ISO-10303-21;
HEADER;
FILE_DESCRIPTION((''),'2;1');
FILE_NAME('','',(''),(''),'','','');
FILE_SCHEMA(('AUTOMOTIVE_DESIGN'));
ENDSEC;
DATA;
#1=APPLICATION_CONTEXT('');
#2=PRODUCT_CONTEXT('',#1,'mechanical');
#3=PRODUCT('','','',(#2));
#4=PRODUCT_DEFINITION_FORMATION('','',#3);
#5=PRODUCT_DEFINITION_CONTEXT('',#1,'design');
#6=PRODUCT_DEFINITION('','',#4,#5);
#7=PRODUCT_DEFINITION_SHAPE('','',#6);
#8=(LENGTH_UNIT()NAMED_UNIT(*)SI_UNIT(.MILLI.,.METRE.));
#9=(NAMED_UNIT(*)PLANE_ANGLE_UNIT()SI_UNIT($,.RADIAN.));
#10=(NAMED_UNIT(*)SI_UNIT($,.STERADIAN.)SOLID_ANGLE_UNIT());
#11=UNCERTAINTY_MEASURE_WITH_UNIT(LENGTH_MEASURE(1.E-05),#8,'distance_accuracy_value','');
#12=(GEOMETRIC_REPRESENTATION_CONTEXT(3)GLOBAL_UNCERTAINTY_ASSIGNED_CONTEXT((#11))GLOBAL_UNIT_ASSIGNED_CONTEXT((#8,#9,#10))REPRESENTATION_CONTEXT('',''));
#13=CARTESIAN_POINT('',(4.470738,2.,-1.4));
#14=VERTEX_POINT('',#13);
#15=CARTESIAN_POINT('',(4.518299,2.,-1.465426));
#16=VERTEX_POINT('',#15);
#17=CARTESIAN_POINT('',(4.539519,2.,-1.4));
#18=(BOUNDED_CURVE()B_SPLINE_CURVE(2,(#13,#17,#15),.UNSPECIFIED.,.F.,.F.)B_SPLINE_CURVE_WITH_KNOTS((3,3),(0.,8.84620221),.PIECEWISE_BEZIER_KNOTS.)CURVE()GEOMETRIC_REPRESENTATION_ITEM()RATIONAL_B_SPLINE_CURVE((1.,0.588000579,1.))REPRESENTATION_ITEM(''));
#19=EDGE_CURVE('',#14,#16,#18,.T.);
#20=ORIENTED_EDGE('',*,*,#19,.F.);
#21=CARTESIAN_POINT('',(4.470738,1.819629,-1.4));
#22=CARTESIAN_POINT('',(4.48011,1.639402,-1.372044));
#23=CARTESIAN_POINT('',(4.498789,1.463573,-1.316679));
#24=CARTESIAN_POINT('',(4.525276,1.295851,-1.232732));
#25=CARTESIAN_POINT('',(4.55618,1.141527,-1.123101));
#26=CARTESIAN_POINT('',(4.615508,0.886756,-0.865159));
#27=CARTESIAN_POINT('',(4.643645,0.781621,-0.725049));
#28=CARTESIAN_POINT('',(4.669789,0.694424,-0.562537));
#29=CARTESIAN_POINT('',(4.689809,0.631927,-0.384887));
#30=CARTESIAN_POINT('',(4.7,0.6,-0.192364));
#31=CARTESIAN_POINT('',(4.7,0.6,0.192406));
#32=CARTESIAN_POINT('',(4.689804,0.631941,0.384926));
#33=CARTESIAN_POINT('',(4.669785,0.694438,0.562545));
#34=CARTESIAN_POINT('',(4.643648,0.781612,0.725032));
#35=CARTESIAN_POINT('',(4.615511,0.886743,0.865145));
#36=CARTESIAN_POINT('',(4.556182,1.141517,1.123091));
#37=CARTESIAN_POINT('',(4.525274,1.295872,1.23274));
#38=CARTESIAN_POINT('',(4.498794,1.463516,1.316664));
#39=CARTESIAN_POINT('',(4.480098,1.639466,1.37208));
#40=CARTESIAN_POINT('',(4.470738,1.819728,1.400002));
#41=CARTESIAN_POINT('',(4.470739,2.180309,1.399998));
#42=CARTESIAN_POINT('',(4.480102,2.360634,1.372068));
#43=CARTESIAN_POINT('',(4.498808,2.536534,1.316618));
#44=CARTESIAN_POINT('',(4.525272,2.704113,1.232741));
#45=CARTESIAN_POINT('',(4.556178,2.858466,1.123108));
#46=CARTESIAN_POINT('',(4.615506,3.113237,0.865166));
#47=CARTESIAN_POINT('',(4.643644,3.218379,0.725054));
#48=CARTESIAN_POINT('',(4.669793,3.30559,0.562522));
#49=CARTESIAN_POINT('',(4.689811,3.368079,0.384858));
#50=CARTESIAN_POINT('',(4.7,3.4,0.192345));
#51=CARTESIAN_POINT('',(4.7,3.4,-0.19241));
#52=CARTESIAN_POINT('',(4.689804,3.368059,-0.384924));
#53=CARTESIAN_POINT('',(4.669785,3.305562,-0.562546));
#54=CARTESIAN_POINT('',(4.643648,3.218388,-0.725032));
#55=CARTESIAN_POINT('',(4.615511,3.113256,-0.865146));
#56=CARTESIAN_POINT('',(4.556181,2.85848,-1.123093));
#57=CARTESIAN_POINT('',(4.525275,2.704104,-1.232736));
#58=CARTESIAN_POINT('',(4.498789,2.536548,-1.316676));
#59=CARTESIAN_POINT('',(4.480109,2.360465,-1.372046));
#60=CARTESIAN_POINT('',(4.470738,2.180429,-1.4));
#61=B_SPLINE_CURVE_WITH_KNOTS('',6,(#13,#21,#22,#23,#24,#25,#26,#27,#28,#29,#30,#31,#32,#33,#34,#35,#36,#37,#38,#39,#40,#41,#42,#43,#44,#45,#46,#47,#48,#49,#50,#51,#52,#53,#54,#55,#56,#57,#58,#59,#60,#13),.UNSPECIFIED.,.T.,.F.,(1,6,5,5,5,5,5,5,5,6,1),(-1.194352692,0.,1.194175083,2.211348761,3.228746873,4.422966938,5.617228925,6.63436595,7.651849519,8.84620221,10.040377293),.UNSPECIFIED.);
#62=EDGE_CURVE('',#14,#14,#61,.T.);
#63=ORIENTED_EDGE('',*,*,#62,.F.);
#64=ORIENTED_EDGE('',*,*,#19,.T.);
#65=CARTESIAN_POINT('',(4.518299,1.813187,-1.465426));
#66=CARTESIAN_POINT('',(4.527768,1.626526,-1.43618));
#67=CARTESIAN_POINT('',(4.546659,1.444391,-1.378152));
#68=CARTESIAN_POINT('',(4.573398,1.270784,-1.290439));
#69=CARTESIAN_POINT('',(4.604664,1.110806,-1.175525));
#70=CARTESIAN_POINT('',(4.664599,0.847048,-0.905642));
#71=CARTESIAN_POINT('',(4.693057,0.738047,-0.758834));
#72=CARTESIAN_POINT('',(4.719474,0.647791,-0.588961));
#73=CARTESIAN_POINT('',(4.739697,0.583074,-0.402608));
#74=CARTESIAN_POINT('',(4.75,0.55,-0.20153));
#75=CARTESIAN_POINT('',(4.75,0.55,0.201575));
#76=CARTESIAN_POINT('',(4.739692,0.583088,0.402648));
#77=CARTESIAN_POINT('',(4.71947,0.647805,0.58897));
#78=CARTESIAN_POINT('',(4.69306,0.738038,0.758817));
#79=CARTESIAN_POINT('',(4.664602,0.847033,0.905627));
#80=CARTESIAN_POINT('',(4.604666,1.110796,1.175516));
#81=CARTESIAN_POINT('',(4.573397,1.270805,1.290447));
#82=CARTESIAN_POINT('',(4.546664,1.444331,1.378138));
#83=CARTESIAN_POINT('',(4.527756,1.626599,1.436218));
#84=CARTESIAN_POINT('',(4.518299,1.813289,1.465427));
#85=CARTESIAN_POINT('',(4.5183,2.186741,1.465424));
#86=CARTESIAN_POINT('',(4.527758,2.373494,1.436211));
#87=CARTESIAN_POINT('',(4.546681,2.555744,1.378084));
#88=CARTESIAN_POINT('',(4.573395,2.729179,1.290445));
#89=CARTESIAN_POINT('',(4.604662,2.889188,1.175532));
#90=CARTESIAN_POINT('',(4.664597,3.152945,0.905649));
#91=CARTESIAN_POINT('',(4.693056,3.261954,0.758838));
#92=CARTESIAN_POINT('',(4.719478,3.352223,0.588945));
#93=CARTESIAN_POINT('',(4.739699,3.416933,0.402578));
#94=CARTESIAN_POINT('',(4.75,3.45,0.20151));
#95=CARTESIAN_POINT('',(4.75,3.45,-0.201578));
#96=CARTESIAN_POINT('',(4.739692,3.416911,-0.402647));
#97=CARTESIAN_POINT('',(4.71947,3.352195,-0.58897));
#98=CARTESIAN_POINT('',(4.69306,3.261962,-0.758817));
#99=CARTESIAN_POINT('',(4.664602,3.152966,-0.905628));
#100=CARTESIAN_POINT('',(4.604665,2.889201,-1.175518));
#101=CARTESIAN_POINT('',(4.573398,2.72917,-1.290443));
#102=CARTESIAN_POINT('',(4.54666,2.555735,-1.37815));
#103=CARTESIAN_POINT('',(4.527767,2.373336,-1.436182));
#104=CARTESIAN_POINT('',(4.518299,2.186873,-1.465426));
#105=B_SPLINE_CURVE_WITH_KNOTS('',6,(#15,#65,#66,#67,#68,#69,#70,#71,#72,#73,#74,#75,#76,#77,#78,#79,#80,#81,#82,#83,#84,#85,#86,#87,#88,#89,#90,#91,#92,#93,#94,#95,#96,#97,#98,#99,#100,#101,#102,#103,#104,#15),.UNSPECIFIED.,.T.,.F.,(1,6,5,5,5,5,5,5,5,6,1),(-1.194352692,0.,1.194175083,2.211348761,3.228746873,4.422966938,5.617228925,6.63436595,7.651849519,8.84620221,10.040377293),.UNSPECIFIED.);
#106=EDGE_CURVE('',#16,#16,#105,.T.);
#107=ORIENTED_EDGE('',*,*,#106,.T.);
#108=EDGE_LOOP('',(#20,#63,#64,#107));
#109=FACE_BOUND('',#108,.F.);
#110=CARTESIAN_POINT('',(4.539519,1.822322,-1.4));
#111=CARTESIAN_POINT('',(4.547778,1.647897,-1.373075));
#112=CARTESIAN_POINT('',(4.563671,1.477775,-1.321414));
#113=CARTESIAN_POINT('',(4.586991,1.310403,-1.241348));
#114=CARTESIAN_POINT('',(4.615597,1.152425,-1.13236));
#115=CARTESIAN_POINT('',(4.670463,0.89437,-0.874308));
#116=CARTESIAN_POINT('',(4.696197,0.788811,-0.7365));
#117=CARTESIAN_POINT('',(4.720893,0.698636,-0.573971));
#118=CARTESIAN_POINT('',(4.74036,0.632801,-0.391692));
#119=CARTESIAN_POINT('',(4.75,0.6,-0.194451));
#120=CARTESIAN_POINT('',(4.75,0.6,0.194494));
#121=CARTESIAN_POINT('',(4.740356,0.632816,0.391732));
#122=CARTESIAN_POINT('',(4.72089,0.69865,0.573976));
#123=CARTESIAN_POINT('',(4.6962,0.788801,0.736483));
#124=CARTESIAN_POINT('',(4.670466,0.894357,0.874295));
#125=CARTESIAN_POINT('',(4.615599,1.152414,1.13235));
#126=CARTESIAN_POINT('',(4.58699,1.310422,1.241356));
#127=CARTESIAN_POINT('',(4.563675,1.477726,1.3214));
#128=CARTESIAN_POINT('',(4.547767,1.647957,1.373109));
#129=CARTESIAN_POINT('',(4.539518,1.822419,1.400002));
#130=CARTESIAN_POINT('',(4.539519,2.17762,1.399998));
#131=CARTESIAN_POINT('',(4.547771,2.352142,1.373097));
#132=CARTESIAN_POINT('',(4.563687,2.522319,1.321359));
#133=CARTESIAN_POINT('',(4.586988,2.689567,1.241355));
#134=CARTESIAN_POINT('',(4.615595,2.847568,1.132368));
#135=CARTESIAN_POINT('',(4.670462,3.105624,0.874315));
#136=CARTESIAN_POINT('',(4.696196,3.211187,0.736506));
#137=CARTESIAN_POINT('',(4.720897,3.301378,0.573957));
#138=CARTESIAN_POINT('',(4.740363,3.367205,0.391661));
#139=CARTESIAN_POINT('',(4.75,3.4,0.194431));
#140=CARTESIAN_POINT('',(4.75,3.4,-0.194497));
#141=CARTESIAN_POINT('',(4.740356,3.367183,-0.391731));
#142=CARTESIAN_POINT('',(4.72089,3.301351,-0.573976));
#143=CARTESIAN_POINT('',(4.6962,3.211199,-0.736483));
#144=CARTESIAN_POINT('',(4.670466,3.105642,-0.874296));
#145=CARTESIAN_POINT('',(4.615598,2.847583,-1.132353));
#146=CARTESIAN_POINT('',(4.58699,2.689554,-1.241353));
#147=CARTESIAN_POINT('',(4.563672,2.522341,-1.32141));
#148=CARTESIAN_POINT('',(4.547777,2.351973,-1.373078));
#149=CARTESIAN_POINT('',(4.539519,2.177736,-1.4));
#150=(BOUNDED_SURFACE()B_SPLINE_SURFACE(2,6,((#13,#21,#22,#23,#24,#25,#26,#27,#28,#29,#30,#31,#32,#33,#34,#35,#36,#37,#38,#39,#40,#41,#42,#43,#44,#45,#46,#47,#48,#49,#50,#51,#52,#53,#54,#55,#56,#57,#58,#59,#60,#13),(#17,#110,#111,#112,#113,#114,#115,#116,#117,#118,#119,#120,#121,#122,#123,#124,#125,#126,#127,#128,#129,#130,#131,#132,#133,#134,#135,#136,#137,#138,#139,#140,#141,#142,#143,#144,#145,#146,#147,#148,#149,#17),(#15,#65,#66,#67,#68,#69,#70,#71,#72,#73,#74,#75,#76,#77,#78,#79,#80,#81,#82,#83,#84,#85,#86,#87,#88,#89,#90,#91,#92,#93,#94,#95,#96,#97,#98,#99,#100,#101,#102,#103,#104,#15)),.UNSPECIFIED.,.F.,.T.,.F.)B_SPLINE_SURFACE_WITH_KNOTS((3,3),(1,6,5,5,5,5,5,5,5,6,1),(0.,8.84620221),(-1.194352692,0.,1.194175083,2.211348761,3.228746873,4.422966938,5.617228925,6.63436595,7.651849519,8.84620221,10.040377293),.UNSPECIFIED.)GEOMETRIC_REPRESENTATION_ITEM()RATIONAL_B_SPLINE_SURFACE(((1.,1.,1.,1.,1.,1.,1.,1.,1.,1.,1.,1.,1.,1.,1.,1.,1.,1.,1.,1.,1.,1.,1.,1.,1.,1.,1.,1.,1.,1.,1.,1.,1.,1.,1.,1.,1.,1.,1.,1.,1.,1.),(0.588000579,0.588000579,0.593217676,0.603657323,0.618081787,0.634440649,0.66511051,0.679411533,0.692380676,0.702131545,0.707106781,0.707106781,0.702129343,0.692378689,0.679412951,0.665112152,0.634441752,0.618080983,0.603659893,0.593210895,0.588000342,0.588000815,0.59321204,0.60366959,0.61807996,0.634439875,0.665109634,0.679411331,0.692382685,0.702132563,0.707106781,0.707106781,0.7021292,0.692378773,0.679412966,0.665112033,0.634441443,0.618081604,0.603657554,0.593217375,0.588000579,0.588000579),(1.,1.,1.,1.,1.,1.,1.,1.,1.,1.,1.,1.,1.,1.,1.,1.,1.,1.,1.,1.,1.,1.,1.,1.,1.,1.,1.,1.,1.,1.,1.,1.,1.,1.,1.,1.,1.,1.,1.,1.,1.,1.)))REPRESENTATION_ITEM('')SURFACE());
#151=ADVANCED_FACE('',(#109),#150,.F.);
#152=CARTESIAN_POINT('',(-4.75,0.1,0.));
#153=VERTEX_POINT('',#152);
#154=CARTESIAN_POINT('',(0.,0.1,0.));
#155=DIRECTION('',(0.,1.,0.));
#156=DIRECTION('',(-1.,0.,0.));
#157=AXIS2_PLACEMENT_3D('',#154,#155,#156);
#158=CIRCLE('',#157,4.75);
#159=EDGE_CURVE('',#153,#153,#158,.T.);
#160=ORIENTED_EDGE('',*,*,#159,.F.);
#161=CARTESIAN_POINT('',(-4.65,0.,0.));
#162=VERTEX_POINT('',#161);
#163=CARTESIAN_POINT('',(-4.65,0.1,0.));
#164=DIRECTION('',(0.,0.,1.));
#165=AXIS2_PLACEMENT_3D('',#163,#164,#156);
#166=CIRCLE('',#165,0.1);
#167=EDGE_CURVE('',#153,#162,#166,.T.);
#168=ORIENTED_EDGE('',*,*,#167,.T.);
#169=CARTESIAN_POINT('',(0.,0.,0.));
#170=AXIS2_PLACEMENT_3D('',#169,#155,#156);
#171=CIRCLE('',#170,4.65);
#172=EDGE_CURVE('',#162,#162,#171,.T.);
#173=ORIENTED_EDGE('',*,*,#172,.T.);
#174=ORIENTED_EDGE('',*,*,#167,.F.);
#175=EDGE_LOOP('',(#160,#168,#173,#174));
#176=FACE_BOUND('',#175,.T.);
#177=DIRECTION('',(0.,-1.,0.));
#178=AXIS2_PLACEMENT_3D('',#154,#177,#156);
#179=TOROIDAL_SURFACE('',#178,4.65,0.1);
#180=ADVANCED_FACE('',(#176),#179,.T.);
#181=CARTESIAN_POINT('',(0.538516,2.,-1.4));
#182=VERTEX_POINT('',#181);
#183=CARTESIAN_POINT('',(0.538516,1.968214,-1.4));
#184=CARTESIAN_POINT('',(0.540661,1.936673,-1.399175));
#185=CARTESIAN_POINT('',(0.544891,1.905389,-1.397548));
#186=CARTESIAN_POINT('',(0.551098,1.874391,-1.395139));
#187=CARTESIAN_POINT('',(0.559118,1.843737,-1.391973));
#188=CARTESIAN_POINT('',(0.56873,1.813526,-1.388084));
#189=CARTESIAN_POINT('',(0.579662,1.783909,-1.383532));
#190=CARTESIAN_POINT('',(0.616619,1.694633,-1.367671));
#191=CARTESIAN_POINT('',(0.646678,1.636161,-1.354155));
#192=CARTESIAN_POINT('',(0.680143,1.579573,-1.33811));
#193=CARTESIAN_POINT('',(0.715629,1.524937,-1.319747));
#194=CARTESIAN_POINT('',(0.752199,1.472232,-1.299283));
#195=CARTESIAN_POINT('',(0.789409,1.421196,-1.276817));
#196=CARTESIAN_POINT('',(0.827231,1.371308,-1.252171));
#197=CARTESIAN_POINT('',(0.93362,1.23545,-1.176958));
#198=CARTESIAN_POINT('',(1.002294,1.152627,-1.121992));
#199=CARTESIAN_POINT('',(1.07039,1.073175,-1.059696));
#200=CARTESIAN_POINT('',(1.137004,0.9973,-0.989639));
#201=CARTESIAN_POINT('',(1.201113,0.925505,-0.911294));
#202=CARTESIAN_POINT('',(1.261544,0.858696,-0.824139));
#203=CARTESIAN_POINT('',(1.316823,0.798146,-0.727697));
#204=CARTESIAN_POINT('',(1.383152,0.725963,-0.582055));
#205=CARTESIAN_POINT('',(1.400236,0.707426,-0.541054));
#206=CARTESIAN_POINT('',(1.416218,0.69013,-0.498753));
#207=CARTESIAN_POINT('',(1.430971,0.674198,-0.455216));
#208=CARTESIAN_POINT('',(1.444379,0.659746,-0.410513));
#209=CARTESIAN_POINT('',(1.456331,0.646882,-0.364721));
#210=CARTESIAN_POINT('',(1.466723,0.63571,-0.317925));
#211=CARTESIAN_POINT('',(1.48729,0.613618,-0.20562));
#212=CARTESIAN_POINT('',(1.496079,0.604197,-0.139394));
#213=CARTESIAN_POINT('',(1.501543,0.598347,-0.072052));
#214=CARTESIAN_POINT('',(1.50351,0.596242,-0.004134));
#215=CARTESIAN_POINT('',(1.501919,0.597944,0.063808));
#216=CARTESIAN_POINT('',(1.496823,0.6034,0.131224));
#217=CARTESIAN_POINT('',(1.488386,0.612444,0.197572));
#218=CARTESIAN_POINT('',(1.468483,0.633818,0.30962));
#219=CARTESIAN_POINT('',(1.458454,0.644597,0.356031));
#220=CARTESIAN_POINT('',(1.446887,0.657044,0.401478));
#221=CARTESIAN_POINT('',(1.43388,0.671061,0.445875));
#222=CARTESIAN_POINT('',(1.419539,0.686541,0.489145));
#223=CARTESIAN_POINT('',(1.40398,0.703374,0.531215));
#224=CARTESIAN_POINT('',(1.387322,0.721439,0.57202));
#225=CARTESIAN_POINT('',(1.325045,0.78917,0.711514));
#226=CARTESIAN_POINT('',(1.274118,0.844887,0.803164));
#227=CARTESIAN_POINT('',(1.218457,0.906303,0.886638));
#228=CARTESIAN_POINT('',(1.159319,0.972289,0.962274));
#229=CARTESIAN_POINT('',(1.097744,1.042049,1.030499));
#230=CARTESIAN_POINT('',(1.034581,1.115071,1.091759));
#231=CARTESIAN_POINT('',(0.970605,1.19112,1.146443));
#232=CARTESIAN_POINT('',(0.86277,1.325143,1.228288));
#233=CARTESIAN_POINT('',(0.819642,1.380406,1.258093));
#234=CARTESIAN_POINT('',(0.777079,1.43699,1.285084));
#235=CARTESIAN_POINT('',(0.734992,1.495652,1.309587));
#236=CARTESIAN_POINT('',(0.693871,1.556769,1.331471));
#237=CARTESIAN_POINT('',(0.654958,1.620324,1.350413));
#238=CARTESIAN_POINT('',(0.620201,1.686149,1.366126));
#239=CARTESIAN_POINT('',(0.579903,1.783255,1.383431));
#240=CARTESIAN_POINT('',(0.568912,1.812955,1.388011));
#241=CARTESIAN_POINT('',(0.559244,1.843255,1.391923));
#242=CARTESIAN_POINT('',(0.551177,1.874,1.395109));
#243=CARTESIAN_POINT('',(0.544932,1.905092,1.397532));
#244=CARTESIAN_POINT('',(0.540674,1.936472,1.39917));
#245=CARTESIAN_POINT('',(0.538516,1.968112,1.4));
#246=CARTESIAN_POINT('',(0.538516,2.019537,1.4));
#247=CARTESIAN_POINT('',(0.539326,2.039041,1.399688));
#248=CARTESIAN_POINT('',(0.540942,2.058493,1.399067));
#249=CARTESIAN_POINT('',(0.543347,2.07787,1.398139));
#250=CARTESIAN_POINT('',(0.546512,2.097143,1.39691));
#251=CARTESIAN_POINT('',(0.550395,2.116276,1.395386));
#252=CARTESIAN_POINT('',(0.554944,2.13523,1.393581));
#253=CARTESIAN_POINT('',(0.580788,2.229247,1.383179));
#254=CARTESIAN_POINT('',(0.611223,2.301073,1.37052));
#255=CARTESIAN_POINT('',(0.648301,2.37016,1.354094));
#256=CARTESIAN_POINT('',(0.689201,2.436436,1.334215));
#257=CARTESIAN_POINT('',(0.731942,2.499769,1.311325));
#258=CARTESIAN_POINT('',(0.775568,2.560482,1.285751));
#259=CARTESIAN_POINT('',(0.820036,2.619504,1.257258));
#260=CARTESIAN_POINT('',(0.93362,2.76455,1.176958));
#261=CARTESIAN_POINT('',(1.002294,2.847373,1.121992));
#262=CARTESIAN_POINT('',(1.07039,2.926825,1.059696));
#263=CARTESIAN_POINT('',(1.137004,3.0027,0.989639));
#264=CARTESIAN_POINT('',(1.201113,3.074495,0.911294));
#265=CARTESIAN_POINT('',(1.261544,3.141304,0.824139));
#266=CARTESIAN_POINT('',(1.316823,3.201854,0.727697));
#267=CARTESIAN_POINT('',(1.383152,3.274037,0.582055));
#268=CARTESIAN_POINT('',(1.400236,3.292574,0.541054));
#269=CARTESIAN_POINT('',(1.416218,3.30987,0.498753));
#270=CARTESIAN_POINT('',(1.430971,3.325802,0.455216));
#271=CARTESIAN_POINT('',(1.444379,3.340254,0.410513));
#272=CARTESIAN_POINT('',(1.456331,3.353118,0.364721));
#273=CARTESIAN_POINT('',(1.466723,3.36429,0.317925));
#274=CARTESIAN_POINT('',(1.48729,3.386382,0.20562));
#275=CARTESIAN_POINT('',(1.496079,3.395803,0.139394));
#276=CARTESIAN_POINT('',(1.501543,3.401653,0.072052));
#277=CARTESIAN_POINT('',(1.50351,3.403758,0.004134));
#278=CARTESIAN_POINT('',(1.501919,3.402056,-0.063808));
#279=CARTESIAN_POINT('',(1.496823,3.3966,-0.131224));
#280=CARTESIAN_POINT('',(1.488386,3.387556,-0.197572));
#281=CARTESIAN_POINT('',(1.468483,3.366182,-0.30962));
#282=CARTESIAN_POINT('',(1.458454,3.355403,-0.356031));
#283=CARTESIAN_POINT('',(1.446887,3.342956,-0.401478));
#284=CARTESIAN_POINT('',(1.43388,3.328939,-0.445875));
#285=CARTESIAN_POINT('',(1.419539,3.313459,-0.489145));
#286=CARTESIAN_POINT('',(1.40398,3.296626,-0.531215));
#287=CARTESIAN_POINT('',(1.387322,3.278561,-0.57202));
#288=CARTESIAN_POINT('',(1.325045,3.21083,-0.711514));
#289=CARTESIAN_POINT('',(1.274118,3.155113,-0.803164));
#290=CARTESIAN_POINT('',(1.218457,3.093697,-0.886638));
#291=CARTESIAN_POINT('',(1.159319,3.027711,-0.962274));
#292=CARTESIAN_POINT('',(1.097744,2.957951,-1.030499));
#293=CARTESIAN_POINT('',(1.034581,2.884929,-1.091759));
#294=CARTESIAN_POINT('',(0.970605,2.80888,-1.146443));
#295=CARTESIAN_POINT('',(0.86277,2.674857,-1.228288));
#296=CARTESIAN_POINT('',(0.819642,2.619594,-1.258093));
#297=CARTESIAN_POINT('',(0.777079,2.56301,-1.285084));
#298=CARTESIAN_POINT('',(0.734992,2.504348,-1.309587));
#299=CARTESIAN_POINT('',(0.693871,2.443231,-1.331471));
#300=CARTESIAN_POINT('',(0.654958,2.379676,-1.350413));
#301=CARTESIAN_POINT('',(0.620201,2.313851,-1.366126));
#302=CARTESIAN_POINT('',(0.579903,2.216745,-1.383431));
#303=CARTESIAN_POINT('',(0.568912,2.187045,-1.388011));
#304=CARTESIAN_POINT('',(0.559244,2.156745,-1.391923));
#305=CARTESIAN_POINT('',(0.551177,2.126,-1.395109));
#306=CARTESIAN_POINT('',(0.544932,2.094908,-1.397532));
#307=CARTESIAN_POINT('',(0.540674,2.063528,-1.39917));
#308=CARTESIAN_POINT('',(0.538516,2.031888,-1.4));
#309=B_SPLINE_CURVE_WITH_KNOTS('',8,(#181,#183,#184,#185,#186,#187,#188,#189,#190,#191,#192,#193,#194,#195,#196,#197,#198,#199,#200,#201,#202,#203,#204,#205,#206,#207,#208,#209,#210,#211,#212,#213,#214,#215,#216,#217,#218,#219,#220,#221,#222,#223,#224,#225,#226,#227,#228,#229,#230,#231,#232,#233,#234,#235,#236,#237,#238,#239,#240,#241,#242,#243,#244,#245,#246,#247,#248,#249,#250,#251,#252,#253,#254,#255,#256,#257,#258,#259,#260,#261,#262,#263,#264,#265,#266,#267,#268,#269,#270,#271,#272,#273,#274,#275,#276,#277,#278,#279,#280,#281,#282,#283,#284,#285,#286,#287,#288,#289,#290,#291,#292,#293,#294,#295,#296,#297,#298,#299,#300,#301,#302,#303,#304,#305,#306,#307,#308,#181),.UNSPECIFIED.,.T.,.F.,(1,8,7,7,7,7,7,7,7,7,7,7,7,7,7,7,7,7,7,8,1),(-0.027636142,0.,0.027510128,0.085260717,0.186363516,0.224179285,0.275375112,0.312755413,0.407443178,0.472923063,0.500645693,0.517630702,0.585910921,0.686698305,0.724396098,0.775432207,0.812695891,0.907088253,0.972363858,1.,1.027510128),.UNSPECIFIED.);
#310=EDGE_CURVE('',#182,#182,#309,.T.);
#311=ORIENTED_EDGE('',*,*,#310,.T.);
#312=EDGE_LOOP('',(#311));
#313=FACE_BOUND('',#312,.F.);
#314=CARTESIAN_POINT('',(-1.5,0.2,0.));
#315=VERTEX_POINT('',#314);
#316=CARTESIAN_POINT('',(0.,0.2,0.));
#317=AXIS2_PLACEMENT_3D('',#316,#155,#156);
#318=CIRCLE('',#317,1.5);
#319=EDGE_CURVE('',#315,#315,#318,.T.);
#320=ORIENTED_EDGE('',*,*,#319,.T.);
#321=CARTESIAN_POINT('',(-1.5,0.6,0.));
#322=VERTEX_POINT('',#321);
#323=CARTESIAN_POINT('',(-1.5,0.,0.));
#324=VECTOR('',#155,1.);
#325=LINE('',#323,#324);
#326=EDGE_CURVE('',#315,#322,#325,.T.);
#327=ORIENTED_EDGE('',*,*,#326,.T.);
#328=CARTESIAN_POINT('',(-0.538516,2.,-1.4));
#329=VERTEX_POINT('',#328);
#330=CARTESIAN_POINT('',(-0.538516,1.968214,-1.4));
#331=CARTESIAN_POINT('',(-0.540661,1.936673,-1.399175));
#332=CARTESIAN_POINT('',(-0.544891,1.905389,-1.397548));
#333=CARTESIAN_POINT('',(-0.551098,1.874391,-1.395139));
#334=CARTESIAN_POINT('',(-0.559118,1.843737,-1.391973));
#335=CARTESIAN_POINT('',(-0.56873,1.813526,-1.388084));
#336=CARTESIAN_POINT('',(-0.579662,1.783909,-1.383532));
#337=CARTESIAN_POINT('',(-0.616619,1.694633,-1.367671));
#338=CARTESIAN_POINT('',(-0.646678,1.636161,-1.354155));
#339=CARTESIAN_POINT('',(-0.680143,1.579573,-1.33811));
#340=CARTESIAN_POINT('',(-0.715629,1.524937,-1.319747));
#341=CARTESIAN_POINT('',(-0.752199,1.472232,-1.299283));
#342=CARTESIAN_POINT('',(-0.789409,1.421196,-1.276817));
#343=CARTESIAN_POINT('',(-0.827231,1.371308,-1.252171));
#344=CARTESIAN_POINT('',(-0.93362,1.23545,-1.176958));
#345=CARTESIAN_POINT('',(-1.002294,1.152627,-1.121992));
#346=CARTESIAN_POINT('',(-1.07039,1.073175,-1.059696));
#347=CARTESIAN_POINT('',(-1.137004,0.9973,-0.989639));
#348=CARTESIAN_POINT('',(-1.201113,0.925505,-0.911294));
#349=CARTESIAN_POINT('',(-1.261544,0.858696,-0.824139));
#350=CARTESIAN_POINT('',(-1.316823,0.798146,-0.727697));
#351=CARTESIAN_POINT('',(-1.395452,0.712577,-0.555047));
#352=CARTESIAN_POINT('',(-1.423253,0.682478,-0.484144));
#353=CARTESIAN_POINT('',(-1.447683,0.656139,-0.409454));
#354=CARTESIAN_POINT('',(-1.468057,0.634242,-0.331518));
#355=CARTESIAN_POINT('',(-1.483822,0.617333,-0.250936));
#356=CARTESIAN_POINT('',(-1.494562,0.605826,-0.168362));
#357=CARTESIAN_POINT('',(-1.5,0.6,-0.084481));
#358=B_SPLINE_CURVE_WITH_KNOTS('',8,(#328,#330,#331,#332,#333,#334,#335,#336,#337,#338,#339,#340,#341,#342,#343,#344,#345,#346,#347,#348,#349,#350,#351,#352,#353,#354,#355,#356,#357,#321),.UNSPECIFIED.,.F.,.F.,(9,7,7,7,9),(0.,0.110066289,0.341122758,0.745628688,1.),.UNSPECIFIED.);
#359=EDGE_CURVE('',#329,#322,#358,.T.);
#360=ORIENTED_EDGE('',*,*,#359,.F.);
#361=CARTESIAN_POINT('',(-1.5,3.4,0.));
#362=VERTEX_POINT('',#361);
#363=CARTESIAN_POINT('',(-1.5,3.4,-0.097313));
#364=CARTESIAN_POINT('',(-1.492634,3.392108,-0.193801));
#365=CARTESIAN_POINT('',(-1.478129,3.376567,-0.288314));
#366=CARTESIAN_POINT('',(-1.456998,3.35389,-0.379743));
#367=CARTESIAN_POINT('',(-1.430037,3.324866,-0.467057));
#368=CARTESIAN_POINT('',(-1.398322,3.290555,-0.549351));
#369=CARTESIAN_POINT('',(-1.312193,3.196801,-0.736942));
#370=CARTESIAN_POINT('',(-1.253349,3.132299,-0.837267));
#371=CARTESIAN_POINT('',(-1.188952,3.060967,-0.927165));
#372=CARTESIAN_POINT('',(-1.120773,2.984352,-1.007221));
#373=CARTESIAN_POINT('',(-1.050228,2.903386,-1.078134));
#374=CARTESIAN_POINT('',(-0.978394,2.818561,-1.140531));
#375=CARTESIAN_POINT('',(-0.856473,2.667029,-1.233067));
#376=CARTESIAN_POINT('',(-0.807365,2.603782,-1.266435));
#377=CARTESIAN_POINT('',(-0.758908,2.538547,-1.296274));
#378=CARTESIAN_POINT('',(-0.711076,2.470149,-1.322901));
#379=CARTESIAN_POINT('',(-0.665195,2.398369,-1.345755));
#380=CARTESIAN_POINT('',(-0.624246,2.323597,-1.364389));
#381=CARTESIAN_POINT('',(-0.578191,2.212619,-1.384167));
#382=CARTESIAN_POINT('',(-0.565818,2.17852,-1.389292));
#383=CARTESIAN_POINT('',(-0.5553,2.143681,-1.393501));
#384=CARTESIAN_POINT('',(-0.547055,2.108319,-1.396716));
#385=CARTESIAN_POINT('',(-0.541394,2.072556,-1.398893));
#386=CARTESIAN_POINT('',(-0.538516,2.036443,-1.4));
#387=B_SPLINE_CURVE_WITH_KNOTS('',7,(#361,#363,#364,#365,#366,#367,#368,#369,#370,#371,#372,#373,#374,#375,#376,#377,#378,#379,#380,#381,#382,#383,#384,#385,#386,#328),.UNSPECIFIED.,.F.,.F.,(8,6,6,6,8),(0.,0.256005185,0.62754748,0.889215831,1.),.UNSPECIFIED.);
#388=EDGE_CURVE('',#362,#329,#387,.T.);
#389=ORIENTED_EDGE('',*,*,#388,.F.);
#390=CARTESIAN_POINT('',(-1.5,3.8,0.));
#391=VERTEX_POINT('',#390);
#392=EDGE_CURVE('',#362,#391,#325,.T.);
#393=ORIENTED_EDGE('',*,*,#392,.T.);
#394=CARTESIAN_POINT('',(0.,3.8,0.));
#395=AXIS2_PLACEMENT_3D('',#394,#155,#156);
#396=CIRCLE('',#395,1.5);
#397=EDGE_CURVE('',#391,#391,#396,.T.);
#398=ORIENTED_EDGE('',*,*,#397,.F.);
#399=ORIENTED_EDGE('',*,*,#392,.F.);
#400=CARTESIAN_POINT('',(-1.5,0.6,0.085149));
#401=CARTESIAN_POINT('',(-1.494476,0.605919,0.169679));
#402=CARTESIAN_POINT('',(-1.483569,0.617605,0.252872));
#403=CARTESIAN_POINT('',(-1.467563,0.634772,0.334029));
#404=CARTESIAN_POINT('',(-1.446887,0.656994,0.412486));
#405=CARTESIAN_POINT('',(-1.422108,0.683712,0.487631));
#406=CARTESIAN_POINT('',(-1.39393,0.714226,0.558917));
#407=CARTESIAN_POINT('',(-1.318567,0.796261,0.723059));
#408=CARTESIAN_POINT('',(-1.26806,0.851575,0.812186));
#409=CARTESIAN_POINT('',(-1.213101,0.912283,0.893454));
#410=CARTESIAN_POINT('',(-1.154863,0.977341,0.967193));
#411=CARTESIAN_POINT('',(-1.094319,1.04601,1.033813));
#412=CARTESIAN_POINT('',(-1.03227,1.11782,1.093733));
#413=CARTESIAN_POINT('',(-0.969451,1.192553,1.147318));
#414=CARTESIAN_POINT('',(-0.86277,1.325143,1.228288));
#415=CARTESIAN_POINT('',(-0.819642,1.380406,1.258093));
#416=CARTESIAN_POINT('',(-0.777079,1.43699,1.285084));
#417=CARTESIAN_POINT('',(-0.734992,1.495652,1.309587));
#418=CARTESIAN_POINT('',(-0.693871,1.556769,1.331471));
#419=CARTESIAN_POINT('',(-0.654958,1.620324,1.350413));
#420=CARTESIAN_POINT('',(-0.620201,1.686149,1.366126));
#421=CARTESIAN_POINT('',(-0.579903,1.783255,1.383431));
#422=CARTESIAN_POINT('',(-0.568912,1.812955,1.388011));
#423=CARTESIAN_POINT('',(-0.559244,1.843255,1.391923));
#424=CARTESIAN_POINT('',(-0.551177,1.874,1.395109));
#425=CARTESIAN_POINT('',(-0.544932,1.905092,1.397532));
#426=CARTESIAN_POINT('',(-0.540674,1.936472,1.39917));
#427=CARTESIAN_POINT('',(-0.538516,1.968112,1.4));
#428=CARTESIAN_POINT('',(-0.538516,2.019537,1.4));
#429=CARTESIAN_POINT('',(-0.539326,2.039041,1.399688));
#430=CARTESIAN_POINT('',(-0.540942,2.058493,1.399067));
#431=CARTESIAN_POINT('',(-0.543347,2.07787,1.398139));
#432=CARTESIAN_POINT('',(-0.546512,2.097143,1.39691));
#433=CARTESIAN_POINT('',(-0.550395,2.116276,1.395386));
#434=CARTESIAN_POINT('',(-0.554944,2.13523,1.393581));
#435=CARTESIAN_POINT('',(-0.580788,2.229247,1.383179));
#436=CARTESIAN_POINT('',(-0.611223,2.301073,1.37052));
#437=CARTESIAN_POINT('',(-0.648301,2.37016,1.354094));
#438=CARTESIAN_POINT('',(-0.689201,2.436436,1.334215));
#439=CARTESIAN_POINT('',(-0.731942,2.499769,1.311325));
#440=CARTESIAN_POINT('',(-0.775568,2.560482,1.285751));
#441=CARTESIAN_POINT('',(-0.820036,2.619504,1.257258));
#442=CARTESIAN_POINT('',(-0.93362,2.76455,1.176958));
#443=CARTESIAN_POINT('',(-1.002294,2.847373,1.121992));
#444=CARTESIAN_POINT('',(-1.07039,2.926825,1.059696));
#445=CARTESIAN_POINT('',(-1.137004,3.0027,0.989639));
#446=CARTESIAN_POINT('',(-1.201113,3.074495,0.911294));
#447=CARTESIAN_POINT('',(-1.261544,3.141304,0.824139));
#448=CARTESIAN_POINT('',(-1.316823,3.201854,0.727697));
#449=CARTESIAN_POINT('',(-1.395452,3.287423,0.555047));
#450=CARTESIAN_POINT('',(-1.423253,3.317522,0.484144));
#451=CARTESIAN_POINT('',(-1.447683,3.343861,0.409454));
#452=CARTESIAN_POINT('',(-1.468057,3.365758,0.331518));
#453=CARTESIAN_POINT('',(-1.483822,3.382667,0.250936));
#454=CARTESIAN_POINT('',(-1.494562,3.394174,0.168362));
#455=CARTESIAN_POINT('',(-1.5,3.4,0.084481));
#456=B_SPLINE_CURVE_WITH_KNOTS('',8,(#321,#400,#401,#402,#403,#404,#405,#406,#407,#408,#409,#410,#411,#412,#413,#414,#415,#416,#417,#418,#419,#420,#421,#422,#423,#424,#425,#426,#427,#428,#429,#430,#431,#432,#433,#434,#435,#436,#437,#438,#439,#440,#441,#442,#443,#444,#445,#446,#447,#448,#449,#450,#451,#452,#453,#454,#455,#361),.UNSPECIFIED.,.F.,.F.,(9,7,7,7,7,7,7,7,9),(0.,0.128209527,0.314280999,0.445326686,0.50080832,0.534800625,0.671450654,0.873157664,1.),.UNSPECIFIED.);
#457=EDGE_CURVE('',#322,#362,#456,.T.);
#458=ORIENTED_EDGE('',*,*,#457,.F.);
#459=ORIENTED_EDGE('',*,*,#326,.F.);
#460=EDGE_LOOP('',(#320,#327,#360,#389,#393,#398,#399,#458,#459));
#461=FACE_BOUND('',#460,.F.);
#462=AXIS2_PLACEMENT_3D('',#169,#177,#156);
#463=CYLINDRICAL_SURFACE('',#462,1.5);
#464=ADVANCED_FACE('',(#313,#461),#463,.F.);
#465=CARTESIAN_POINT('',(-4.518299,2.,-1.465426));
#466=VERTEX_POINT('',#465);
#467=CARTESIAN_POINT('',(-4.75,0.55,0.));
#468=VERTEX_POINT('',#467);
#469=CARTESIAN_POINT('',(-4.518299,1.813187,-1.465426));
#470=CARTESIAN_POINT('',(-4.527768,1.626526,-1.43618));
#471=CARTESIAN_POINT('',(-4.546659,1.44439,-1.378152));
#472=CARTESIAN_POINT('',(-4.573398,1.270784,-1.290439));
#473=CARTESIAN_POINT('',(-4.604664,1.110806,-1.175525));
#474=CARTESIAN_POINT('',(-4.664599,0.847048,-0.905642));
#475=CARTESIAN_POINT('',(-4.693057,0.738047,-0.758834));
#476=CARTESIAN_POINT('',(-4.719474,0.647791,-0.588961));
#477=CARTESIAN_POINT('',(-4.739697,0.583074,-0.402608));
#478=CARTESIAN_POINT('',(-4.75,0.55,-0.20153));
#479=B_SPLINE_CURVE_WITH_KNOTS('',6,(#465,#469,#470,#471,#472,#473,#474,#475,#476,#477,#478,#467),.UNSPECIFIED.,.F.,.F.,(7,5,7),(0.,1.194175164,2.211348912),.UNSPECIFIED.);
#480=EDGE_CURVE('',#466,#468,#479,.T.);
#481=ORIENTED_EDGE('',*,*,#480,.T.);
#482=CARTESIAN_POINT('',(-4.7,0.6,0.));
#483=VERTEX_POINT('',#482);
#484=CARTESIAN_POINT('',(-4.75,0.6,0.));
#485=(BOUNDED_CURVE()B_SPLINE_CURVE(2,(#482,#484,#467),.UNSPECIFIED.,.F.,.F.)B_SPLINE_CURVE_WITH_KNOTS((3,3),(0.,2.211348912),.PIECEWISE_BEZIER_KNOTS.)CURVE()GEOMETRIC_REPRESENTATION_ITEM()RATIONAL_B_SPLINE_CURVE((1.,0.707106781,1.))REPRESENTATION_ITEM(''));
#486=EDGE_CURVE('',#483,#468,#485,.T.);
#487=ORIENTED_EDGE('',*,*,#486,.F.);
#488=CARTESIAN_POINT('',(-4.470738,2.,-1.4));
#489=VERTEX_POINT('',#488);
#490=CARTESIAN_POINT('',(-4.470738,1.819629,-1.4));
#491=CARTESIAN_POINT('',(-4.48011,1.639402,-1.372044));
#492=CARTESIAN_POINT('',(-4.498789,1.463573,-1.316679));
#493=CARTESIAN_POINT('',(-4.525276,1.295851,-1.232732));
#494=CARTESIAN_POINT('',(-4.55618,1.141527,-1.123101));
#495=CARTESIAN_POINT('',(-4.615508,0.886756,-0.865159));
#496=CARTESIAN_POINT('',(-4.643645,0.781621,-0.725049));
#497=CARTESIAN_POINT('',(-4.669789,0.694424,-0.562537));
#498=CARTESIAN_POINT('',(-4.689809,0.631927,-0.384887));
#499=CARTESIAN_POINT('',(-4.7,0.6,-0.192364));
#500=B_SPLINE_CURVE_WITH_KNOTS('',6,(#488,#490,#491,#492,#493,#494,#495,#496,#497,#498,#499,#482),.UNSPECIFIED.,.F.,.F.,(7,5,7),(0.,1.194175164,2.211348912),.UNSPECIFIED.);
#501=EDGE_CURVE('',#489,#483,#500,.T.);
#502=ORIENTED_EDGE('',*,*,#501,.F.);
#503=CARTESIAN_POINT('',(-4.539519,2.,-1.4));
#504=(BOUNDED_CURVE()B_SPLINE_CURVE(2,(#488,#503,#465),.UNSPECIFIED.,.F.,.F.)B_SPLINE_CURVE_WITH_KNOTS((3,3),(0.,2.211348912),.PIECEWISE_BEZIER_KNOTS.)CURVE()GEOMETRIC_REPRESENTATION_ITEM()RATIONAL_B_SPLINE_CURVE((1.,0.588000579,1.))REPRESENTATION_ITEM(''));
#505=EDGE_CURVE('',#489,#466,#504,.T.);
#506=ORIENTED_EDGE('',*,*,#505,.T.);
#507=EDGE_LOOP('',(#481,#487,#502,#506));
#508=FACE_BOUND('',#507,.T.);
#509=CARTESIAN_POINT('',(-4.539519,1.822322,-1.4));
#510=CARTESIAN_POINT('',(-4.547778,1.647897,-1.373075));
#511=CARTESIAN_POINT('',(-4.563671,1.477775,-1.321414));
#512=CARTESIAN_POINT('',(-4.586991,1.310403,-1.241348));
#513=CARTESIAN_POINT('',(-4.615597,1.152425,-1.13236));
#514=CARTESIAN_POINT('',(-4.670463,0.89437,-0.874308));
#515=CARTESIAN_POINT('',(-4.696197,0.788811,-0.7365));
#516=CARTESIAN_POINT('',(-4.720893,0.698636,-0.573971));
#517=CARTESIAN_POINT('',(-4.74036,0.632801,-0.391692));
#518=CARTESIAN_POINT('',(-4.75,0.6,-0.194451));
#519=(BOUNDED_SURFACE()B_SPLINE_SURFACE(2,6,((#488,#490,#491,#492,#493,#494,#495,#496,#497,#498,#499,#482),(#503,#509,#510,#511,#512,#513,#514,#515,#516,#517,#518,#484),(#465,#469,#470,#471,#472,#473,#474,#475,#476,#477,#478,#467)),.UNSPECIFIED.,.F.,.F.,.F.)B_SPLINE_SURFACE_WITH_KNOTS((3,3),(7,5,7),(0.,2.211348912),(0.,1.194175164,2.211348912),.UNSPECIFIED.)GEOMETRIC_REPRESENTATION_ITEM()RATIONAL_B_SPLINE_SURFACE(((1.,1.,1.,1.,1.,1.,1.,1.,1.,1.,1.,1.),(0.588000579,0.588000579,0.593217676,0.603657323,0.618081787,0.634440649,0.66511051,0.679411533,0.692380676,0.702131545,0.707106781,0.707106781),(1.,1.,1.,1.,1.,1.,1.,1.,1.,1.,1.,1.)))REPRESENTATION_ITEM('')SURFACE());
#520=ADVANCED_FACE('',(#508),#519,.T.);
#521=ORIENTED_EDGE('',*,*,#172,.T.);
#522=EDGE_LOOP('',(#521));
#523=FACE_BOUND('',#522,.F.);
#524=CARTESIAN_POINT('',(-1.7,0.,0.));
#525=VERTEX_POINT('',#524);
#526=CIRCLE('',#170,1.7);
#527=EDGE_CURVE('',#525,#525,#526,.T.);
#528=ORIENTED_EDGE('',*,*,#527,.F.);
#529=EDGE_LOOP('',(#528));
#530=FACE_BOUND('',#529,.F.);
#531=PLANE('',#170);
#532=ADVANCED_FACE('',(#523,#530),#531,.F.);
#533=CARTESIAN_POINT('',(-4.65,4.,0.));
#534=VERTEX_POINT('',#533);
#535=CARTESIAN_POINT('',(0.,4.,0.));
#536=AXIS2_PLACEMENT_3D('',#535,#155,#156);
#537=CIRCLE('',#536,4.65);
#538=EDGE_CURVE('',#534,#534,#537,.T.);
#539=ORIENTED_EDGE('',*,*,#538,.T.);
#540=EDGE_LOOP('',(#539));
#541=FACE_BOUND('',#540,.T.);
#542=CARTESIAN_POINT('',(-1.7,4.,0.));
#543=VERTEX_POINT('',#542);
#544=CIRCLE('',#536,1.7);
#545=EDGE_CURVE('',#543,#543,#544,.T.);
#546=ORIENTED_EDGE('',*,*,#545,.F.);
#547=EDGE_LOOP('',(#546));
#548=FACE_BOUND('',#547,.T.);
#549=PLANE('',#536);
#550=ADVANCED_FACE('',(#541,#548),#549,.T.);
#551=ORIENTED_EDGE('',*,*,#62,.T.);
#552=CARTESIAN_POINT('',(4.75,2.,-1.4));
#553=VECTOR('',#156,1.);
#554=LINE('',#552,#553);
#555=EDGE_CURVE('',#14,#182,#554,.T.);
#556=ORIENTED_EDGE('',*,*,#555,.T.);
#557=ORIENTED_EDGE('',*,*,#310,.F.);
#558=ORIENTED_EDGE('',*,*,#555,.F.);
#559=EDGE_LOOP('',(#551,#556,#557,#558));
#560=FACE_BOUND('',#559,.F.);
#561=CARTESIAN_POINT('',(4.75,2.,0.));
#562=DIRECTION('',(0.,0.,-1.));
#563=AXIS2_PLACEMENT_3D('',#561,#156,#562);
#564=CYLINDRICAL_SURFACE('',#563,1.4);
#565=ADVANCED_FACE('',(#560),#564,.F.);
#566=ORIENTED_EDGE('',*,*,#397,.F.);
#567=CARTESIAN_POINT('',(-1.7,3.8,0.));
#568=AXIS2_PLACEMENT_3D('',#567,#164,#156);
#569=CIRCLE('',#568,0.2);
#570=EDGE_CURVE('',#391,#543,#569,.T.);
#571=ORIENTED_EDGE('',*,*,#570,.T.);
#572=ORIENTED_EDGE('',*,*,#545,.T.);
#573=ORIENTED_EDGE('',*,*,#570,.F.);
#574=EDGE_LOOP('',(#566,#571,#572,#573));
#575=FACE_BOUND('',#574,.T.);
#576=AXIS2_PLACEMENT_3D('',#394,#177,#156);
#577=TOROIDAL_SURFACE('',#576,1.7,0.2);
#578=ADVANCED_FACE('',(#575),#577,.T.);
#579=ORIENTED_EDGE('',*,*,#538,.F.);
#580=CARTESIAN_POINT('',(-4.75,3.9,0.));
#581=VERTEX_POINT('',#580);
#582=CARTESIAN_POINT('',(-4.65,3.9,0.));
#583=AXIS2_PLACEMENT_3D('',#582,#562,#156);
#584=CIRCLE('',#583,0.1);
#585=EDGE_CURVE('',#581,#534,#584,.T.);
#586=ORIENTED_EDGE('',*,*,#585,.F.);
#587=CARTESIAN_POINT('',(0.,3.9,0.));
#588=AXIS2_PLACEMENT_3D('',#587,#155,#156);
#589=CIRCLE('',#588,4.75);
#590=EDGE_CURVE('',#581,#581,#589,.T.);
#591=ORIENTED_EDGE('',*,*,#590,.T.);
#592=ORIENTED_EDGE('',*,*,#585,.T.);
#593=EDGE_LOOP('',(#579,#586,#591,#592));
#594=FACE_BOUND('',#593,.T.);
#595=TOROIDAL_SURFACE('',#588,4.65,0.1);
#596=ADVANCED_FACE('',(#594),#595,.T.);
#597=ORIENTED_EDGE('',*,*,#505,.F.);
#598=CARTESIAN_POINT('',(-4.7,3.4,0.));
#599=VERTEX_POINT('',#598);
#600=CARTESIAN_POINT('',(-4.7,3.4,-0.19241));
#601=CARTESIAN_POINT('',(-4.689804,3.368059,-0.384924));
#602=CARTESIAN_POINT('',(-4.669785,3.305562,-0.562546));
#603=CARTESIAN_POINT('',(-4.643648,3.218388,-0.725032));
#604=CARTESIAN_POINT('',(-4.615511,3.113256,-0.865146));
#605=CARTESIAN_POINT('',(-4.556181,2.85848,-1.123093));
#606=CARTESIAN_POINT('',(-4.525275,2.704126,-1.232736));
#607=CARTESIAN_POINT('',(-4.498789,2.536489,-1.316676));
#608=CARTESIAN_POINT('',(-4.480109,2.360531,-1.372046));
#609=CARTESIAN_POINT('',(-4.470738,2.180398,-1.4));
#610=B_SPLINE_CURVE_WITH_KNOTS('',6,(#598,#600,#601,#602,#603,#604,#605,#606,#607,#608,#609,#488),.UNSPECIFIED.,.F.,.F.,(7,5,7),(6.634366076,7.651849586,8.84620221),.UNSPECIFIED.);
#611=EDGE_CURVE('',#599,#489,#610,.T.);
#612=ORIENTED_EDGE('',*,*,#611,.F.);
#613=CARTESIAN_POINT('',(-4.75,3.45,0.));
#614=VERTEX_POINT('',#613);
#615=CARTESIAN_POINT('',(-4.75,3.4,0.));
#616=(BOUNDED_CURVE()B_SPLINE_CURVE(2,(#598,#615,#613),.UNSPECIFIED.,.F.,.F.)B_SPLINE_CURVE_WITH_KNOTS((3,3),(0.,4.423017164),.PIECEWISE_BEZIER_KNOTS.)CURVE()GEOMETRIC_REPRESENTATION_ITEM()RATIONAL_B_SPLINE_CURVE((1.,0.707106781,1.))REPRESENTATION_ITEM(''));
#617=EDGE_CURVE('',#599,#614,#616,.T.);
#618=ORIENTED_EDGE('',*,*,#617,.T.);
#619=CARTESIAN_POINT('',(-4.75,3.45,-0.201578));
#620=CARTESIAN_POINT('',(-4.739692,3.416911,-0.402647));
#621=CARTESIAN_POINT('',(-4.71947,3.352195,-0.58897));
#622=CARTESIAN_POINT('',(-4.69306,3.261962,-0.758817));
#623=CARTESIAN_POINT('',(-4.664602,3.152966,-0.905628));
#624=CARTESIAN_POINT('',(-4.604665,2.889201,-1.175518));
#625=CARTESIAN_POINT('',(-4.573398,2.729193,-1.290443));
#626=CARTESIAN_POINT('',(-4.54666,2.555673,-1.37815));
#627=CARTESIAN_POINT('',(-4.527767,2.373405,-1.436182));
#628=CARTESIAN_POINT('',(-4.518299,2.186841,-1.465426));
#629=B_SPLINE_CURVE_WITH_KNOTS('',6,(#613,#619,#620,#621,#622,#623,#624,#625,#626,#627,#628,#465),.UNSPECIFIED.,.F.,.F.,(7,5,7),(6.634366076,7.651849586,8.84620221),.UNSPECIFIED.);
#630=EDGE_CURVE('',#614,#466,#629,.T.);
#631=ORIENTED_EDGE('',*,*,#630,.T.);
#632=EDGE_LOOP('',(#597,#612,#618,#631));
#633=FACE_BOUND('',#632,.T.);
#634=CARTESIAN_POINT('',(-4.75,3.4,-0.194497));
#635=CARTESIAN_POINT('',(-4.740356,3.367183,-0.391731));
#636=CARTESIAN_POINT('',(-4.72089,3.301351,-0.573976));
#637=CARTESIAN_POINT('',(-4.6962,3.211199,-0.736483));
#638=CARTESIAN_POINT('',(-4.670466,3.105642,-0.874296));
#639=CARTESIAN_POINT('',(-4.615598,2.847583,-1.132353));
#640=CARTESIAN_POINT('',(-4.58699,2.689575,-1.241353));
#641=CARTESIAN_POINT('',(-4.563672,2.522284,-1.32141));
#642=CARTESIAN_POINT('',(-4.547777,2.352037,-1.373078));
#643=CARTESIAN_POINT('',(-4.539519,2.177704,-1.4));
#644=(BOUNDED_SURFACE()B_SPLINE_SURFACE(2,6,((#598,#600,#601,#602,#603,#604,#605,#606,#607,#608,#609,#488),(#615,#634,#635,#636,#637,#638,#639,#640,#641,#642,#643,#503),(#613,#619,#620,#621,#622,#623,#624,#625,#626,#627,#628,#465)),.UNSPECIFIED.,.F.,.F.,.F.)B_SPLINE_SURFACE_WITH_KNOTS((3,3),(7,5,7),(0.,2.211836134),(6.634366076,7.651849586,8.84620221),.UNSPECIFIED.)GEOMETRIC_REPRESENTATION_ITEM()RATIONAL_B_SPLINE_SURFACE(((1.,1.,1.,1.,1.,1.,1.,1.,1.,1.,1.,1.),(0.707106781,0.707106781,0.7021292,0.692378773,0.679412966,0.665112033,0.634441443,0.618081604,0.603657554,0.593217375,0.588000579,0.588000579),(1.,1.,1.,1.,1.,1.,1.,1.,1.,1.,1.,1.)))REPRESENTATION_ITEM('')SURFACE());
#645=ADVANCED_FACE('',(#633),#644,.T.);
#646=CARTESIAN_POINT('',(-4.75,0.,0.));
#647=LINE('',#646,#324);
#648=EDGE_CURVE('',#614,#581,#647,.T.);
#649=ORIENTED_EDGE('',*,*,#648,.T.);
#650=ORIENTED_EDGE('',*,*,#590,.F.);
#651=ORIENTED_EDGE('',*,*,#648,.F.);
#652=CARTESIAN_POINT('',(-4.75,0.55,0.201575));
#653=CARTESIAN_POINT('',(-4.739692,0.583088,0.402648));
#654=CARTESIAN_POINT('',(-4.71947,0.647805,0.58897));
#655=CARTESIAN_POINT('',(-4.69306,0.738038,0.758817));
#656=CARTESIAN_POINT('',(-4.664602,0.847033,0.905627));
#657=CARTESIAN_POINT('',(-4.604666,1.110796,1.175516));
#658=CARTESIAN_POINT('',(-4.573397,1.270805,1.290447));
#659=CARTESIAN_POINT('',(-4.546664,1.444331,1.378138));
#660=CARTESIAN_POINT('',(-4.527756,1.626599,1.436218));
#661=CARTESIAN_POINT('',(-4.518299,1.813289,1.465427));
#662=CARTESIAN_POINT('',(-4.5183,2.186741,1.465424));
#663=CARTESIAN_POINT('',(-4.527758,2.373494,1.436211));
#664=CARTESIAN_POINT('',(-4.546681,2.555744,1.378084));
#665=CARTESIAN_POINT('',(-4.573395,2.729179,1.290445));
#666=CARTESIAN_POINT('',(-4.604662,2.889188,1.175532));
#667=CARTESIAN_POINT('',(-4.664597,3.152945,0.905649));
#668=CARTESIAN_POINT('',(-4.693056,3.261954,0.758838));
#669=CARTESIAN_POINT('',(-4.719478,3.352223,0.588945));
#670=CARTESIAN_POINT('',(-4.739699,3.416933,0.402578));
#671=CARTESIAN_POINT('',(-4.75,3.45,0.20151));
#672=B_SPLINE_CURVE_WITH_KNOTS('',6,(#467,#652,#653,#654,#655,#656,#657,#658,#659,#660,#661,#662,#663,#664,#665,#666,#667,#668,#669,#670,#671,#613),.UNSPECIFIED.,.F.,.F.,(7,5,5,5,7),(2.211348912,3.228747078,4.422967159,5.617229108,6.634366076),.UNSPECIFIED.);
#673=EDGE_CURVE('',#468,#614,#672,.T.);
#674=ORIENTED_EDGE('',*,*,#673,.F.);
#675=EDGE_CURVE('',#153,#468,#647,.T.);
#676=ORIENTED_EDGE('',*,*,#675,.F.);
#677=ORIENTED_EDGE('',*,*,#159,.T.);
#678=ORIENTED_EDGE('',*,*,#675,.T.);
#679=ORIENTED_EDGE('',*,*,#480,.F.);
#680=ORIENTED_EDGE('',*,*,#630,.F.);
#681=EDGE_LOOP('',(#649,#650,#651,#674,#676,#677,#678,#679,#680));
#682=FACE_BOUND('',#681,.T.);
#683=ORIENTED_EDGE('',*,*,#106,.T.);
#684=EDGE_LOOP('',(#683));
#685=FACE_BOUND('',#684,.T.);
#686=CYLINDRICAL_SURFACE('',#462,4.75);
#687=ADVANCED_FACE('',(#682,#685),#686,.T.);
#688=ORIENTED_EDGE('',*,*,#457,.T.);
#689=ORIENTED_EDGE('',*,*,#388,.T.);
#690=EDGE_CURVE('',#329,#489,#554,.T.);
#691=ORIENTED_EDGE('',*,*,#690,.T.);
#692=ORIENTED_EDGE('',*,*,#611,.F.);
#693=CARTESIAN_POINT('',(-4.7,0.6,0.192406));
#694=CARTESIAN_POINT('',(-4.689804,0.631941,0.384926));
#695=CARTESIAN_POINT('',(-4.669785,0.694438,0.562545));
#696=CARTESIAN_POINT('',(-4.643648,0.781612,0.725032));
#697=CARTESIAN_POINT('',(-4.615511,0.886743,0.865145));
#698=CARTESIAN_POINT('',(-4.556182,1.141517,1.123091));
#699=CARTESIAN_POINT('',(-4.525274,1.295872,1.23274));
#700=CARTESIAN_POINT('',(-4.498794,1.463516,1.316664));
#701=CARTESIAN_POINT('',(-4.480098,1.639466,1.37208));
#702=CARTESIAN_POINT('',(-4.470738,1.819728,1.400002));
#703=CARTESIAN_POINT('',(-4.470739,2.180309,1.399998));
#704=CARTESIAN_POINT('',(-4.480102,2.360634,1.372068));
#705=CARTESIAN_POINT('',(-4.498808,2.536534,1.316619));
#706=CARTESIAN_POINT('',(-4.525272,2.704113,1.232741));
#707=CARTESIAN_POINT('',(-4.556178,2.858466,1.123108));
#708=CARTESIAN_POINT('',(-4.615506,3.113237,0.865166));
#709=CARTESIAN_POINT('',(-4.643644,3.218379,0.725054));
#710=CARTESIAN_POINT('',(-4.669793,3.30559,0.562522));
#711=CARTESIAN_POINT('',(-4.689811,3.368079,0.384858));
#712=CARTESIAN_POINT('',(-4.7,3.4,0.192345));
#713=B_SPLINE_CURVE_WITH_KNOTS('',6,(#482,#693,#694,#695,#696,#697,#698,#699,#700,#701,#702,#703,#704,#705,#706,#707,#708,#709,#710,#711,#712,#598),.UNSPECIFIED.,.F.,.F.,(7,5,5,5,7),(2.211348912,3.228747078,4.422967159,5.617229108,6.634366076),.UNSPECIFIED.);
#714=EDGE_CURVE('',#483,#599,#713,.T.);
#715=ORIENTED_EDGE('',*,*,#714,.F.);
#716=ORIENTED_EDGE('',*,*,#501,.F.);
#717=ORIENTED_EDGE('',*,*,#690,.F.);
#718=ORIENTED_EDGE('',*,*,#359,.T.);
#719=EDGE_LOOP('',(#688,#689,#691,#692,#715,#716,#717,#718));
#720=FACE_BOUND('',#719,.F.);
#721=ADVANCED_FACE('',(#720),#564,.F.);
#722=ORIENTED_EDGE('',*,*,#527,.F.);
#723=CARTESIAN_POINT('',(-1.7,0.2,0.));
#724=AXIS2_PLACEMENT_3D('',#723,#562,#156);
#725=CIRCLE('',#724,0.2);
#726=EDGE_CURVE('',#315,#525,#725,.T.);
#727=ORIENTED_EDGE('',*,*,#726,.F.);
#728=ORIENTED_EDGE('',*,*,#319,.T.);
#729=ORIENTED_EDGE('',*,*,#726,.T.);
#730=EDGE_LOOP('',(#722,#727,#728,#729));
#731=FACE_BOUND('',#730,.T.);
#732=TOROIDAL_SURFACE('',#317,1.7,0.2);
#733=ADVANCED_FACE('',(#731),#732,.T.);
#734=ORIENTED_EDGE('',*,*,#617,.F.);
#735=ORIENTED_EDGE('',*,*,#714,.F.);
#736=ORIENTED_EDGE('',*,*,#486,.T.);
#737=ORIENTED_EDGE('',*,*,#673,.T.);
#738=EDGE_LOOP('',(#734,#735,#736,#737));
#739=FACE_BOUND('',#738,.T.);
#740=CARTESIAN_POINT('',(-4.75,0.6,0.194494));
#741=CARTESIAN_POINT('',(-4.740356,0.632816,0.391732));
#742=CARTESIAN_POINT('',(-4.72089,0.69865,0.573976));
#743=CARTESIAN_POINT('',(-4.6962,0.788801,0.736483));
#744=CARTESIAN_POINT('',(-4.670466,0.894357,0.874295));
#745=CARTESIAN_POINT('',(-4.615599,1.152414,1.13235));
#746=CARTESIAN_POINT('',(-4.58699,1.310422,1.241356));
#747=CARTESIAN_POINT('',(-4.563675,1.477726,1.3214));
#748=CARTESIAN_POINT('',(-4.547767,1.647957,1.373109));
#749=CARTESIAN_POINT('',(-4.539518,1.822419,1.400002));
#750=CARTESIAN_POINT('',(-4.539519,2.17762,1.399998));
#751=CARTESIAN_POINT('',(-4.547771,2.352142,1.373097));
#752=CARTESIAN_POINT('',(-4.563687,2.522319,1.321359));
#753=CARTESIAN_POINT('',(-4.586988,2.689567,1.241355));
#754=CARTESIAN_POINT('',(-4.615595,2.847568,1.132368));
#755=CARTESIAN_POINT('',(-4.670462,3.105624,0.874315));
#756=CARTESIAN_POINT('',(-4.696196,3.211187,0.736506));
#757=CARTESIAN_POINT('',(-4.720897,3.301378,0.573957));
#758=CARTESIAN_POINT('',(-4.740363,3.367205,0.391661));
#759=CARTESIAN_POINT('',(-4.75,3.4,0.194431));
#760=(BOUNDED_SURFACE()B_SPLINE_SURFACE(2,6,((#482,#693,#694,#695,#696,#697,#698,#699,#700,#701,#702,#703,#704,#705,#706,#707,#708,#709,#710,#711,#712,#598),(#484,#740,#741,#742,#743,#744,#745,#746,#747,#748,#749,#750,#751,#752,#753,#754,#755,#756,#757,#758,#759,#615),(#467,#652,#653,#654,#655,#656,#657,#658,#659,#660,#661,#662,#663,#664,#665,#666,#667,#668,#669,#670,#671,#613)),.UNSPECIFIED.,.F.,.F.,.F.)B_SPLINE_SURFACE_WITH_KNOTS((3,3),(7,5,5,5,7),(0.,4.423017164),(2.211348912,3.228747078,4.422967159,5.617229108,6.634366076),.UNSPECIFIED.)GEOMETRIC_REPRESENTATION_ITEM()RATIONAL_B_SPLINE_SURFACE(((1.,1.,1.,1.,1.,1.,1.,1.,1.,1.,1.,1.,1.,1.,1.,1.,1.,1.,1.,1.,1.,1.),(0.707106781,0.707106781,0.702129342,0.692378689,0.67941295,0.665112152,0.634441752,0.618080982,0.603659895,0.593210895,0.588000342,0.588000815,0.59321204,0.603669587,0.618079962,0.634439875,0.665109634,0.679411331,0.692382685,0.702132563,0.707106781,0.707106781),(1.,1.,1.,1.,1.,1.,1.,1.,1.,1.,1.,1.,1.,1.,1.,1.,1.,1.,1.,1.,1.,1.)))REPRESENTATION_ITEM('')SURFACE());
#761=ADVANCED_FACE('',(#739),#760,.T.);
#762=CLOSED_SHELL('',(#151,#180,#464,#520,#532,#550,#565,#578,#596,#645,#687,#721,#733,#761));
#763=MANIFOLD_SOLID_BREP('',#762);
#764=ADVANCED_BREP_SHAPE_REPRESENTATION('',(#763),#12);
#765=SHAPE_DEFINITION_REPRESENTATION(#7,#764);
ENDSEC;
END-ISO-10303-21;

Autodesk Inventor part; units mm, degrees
ref_plane "XZ Plane" through (0, 0, 0) normal (0, 1, 0) x (-1, 0, 0)
ref_plane "XY Plane" through (0, 0, 0) normal (0, 0, 1) x (1, 0, 0)
sketch "Szkic1" plane through (0, 0, 0) normal (0, 1, 0) x (-1, 0, 0)
  circle A0 centre (0, 0) radius 4.75
  circle A1 centre (0, 0) radius 1.5
  dimension "d0" = 9.5
  dimension "d1" = 3
extrude "Wyciągnięcie proste1" add sketch "Szkic1" along normal blind 4
ref_plane "Płaszczyzna konstrukcyjna1" through (4.75, 0, 0) normal (1, 0, 0) x (0, 1, 0)
sketch "Szkic2" plane through (4.75, 0, 0) normal (1, 0, 0) x (0, 1, 0)
  line L0 (-0.6, 0) -> (3.6, 0) projected
  line L1 (4, -4.75) -> (4, 4.75) projected
  line L2 (0, 4.75) -> (0, -4.75) projected
  circle A0 centre (2, 0) radius 1.4
  line L3 (2, 0) -> (4, 0)
  line L4 (2, 0) -> (0, 0)
  dimension "d5" = 2.8
hole "Otwór1" at (4.75, 2, 0) direction (-1, 0, 0) diameter 2.8 end through all
thread "Gwint1" size "M3x0.5" class "6H" standard "ANSI Metric M Profile" full length
thread "Gwint2" size "M3x0.5" class "6H" standard "ANSI Metric M Profile" full length
fillet "Zaokrąglenie1" radius 0.1 2 edges at (4.75, 4, 0) (4.75, 0, 0)
fillet "Zaokrąglenie2" radius 0.2 1 edges at (1.5, 4, 0)
fillet "Zaokrąglenie3" radius 0.2 1 edges at (1.5, 0, 0)
fillet "Zaokrąglenie4" radius 0.05 6 edges at (-4.6327, 1.0728, -1.049) (-4.539, 1.9999, 1.4) (-4.6327, 2.9272, -1.0489) (4.6327, 1.0728, -1.049) (4.6327, 2.9272, -1.0489) (4.539, 1.9999, 1.4)
fillet_without_effect "Zaokrąglenie5"
equation "\"d6\" = d5"
equation "\"d4\" = 0.5 * d0"
properties part number "Smiglo-tuleja trzymajaca"
